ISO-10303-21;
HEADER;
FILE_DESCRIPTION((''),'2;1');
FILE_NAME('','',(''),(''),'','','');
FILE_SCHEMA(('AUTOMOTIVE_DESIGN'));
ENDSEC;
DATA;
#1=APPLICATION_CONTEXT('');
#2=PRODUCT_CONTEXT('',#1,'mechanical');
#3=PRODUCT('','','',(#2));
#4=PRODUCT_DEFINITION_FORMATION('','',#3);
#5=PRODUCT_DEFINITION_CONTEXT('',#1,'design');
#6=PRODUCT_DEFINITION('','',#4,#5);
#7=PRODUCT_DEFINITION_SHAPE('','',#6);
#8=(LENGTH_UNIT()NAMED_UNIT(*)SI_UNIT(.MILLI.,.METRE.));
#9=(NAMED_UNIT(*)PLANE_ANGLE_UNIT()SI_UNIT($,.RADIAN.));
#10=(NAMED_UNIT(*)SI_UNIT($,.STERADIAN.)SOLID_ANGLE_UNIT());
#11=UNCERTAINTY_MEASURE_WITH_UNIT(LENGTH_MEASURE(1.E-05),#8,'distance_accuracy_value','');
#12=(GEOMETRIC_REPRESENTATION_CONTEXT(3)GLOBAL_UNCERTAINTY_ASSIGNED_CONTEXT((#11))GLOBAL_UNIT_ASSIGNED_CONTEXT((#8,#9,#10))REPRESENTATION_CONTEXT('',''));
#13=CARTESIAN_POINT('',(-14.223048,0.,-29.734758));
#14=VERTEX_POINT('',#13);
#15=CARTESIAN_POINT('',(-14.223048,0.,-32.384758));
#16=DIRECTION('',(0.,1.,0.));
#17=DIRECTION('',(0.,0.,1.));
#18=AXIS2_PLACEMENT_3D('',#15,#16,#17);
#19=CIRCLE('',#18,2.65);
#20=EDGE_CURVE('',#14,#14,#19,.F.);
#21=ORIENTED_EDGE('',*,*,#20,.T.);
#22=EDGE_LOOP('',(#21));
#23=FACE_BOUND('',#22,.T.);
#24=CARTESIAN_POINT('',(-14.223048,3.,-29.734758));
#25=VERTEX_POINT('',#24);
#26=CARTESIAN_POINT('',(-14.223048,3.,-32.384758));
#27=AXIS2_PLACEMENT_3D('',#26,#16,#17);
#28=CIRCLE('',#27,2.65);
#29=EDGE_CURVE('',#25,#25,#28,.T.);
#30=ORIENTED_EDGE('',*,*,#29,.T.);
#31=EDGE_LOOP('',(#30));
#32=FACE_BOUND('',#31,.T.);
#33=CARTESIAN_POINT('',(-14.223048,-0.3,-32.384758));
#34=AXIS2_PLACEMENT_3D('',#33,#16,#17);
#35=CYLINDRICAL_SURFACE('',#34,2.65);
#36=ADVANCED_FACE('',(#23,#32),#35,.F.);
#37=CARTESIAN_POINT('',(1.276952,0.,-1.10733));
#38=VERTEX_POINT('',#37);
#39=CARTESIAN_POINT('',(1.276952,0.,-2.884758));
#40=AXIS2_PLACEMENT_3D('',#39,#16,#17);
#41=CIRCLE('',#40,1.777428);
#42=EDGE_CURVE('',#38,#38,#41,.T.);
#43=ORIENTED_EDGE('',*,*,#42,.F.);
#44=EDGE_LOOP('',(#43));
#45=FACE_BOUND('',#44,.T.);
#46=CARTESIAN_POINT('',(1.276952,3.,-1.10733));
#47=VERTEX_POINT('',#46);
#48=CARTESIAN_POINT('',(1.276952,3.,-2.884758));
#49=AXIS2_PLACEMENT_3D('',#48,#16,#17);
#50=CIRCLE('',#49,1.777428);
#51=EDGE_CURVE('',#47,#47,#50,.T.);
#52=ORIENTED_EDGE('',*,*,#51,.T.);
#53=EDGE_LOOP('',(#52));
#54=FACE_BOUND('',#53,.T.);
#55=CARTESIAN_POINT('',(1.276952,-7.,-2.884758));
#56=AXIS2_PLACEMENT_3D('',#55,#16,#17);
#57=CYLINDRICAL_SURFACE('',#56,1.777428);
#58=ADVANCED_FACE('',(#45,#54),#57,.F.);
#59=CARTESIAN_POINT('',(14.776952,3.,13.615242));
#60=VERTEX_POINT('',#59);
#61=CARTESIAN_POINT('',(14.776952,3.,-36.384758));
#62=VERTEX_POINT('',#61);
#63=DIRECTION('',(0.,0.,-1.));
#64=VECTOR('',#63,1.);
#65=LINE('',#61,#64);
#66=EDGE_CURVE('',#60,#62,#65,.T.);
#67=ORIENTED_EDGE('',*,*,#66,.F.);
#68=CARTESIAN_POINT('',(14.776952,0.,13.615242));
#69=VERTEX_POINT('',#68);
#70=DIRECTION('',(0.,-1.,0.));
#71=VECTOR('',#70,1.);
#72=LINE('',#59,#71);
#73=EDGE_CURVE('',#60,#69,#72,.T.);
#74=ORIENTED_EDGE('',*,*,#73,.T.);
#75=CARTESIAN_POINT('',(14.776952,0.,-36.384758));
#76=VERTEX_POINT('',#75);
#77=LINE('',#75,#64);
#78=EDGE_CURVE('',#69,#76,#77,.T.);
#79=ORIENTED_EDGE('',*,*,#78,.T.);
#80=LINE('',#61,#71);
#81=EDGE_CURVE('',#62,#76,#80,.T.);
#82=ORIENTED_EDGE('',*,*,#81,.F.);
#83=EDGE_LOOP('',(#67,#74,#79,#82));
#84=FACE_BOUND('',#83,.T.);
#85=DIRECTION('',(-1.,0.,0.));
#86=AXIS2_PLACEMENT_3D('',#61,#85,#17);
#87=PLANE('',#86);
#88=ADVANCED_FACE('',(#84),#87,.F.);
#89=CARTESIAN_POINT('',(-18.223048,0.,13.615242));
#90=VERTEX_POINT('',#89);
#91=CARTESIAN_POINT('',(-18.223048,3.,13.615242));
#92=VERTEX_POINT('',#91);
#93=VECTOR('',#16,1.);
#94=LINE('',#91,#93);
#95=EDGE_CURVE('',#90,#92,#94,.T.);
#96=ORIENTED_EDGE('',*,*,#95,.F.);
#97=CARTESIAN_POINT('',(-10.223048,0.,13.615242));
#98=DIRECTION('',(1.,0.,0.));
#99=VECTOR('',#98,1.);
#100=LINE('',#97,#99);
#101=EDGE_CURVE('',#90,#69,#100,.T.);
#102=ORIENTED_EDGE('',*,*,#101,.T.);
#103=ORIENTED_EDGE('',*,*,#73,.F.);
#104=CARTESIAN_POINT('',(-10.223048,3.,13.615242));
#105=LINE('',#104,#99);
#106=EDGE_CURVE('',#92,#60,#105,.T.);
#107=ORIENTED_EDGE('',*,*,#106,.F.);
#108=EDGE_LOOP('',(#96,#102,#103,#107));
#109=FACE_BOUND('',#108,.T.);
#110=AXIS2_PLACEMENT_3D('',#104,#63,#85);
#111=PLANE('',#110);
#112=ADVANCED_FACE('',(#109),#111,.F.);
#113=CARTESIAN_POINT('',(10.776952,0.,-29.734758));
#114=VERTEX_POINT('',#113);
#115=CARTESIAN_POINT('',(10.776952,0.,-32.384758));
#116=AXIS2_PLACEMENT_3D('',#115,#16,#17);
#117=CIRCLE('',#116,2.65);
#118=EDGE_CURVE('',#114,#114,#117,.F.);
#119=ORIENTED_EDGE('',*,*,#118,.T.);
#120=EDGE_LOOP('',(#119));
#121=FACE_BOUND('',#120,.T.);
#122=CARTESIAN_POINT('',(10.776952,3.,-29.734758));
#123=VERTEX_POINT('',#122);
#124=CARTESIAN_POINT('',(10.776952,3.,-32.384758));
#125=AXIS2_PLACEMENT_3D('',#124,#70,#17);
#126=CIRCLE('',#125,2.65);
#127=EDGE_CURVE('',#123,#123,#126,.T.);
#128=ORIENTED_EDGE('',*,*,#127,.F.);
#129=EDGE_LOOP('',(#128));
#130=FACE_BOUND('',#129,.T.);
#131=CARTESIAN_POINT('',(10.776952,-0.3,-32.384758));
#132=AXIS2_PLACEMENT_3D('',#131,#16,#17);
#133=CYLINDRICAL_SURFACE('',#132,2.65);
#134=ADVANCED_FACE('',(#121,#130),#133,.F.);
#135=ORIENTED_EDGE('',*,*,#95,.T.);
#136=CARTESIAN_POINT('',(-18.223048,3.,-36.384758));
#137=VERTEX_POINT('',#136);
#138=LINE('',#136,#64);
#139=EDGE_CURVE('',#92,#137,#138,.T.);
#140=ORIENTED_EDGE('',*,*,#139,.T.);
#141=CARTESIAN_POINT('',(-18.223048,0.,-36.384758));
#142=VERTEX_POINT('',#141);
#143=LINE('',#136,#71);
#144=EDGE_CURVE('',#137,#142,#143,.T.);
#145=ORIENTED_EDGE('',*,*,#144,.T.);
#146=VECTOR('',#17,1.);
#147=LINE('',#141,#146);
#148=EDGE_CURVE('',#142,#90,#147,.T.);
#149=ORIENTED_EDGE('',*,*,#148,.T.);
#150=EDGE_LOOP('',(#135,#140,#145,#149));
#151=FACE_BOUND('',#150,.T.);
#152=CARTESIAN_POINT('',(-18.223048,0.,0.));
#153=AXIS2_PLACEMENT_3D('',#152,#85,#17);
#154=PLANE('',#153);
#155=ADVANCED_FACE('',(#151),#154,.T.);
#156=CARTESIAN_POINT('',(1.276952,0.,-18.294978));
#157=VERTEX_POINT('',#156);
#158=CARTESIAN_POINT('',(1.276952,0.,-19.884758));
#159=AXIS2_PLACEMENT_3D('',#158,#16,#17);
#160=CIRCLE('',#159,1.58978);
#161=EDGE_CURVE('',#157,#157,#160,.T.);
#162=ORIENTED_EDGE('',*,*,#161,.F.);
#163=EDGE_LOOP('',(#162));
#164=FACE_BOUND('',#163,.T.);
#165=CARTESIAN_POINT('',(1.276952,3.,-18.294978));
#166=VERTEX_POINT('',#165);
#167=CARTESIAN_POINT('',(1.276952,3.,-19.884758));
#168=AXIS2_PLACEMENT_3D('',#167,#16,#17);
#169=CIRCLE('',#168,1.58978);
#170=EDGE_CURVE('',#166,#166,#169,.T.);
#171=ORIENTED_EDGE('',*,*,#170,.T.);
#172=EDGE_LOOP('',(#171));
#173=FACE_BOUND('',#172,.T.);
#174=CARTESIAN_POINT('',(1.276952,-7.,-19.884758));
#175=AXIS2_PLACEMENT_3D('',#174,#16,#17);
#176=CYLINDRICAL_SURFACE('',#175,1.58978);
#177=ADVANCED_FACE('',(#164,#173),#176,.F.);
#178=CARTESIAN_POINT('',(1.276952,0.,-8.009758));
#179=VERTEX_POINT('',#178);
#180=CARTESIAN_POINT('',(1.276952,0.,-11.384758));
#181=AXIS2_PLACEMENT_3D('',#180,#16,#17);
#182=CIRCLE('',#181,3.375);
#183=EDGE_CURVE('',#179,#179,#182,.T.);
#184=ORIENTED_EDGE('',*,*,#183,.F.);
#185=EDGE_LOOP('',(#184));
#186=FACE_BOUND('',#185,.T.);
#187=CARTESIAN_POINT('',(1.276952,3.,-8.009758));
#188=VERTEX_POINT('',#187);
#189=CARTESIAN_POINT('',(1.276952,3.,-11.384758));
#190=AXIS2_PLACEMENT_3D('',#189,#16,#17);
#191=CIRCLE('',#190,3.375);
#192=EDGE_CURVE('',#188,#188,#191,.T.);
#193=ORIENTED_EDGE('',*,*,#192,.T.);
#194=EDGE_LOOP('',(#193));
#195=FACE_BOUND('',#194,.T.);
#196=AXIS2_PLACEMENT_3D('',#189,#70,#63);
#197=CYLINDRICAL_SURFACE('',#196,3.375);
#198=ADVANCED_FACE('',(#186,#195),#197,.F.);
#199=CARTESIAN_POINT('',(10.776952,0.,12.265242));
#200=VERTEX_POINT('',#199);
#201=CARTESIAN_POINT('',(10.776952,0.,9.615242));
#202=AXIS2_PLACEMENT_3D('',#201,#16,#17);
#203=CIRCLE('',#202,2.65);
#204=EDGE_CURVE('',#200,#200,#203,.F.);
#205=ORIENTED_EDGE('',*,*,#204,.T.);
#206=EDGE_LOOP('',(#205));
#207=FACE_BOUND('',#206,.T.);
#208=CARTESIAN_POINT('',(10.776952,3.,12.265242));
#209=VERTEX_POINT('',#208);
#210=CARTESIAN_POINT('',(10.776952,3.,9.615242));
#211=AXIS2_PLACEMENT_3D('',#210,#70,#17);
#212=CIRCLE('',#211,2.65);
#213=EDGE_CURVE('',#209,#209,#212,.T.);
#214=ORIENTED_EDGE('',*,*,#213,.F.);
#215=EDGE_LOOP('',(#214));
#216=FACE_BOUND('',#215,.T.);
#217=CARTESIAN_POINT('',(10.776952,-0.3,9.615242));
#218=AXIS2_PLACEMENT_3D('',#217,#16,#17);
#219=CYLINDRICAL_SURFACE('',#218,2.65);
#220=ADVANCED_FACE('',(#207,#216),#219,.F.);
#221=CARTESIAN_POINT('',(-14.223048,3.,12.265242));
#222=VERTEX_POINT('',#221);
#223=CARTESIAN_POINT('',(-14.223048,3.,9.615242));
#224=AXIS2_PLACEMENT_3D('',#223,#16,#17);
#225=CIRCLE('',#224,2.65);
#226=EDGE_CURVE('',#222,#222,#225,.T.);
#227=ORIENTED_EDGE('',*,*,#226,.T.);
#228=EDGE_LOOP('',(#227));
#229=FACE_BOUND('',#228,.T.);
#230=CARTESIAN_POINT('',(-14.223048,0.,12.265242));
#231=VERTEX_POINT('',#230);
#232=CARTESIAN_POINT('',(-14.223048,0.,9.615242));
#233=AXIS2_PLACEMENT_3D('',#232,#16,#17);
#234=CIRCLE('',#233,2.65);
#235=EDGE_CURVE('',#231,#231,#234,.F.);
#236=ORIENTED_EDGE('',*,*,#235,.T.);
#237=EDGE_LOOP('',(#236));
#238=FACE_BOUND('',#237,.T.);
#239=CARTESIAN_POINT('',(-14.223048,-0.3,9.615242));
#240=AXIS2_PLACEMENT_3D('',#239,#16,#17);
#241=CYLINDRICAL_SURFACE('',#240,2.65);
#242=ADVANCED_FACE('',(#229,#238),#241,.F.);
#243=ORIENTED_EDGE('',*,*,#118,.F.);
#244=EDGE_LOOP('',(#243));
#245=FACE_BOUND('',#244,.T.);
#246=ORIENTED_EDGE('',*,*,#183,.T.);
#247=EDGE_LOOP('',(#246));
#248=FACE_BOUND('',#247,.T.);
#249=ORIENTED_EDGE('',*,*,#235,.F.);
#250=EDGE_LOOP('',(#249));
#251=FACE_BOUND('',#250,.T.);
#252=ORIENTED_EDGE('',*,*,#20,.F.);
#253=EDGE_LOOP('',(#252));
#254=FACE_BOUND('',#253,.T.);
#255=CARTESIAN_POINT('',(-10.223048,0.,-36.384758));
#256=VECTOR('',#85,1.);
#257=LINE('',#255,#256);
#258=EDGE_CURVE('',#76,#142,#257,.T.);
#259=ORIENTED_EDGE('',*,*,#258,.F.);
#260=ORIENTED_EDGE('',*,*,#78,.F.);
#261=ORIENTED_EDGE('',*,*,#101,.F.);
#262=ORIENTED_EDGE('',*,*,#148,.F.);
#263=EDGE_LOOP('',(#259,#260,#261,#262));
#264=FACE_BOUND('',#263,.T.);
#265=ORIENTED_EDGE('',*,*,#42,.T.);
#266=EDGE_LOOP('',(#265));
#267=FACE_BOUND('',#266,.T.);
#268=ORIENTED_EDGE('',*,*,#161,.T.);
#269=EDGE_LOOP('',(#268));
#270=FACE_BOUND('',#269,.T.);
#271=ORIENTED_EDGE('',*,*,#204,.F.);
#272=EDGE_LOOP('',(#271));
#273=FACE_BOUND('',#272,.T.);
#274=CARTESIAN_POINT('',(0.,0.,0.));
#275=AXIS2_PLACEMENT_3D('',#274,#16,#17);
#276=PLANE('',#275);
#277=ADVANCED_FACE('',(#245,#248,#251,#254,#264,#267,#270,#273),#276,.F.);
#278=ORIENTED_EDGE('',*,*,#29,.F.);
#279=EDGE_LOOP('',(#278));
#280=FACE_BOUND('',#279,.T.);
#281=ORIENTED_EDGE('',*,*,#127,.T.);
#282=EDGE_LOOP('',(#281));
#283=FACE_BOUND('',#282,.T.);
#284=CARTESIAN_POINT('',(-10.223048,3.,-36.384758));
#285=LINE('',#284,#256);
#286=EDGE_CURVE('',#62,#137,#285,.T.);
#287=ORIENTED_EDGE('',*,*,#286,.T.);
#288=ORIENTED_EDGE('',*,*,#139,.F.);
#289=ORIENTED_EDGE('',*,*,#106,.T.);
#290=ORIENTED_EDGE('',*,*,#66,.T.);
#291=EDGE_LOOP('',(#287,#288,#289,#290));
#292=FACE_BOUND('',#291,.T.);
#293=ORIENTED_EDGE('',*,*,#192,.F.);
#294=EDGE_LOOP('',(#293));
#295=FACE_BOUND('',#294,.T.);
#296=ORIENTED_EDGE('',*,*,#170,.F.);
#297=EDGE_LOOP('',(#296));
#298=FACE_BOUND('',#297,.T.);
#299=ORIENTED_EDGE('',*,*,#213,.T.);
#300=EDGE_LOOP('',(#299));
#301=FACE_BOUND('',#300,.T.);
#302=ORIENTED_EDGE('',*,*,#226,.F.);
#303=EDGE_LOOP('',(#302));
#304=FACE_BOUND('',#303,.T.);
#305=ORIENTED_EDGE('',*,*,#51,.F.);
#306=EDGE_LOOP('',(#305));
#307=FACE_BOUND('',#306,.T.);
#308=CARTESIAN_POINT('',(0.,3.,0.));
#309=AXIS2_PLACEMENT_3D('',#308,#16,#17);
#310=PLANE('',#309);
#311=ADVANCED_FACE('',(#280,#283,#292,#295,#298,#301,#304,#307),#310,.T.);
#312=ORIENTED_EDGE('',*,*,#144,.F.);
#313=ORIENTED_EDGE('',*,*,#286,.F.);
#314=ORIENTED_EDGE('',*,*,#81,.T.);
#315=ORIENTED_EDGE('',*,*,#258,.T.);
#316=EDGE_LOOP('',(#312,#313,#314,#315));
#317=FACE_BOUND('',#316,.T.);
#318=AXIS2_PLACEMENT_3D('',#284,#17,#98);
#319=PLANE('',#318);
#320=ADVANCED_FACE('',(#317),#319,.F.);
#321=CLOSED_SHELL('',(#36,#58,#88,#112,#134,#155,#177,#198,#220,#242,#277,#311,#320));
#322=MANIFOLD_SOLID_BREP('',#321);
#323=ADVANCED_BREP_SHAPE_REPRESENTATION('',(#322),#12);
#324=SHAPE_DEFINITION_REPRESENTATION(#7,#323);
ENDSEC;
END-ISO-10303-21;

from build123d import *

# Parameters (mm, degrees)
SKETCH1_W           = 25
SKETCH1_H           = 50
SKETCH1_R           = 3.375
BOSS_EXTRUDE1_DEPTH = 3
SKETCH2_W           = 50
SKETCH2_H           = 3
BOSS_EXTRUDE2_DEPTH = 8
SKETCH3_W           = 8
SKETCH3_H           = 50
BOSS_EXTRUDE3_DEPTH = 42
SKETCH4_R           = 2.65
CUT_EXTRUDE1_DEPTH  = 3.3
SKETCH5_R           = 5.802370205
CUT_EXTRUDE2_DEPTH  = 9
FILLET2_R           = 1
SKETCH6_R           = 12.7
BOSS_EXTRUDE4_DEPTH = 2
FILLET4_R           = 1
SKETCH8_R           = 1.589780168
SKETCH8_R_2         = 1.777428262
CUT_EXTRUDE3_DEPTH  = 10
SKETCH9_W           = 8
SKETCH9_H           = 42
CUT_EXTRUDE4_DEPTH  = 68.79439129
SKETCH10_W          = 33.517939775
SKETCH10_H          = 6.212330843
CUT_EXTRUDE5_DEPTH  = 55


with BuildPart() as part:
    # Sketch1 → Boss-Extrude1 (new body)
    with BuildSketch(Plane(origin=(0, 0, 0), x_dir=(1, 0, 0), z_dir=(0, 1, 0))):
        with Locations((2.276951673, 11.384758364)):
            Rectangle(SKETCH1_W, SKETCH1_H)
        with Locations(Location((1.276951673, 11.384758364, 0), (0, 0, 270))):
            Circle(SKETCH1_R, mode=Mode.SUBTRACT)
    extrude(amount=BOSS_EXTRUDE1_DEPTH)

    # Sketch2 → Boss-Extrude2 (add)
    with BuildSketch(Plane.ZY.offset(10.223048327)):
        with Locations((-11.384758364, 1.5)):
            Rectangle(SKETCH2_W, SKETCH2_H)
    extrude(amount=BOSS_EXTRUDE2_DEPTH)

    # Sketch3 → Boss-Extrude3 (add)
    with BuildSketch(Plane.XZ):
        with Locations((-14.223048327, -11.384758364)):
            Rectangle(SKETCH3_W, SKETCH3_H)
    extrude(amount=BOSS_EXTRUDE3_DEPTH)

    # Sketch4 → Cut-Extrude1 (cut)
    with BuildSketch(Plane(origin=(0, 3, 0), x_dir=(1, 0, 0), z_dir=(0, 1, 0))):
        with Locations(Location((-14.223048327, 32.384758364, 0), (0, 0, 270))):
            Circle(SKETCH4_R)
        with Locations(Location((-14.223048327, -9.615241636, 0), (0, 0, 270))):
            Circle(SKETCH4_R)
    cut_extrude1 = extrude(amount=-CUT_EXTRUDE1_DEPTH, mode=Mode.SUBTRACT)

    # Mirror1: Cut-Extrude1 across plane
    add(cut_extrude1.mirror(Plane.ZX.offset(-19.5)), mode=Mode.SUBTRACT)

    # Sketch5 → Cut-Extrude2 (cut)
    with BuildSketch(Plane.ZY.offset(18.223048327)):
        with Locations((-11.836279124, -21)):
            Circle(SKETCH5_R)
    extrude(amount=-CUT_EXTRUDE2_DEPTH, mode=Mode.SUBTRACT)

    # Fillet2
    fillet2_edges = [part.edges().sort_by_distance(p)[0] for p in [
        (-10.223048327, -21, -17.638649329),
    ]]
    fillet(fillet2_edges, radius=FILLET2_R)

    # Mirror2: Cut-Extrude1 across plane
    add(cut_extrude1.mirror(Plane.ZY.offset(1.723048327)), mode=Mode.SUBTRACT)

    # Sketch6 → Boss-Extrude4 (add)
    with BuildSketch(Plane(origin=(0, 3, 0), x_dir=(1, 0, 0), z_dir=(0, 1, 0))):
        with BuildLine():
            Line((14.776951673, 5.567542535), (14.776951673, 17.201974193))
            ThreePointArc((14.776951673, 17.201974193), (-13.423048327, 11.384758364), (14.776951673, 5.567542535))
        make_face()
        with Locations(Location((1.276951673, 11.384758364, 0), (0, 0, 270))):
            Circle(SKETCH6_R, mode=Mode.SUBTRACT)
    extrude(amount=BOSS_EXTRUDE4_DEPTH)

    # Fillet4
    # the kernel refuses this fillet: 1 mm, written as the material it takes off along each edge
    with BuildSketch(Plane(origin=(14.776951673, 5, -3.067542535), x_dir=(0, -1, 0), z_dir=(0, 0, -1))) as fillet4_piece_1:
        with BuildLine():
            CenterArc((FILLET4_R, FILLET4_R), FILLET4_R, 180, 90)
            Line((0, FILLET4_R), (0, 0))
            Line((0, 0), (FILLET4_R, 0))
        make_face()
    extrude(amount=16.634431658, mode=Mode.SUBTRACT)

    # Sketch8 → Cut-Extrude3 (cut)
    with BuildSketch(Plane(origin=(0, 3, 0), x_dir=(1, 0, 0), z_dir=(0, 1, 0))):
        with Locations(Location((1.276951673, 19.884758364, 0), (0, 0, 270))):
            Circle(SKETCH8_R)
        with Locations(Location((1.276951673, 2.884758364, 0), (0, 0, 270))):
            Circle(SKETCH8_R_2)
    extrude(amount=-CUT_EXTRUDE3_DEPTH, mode=Mode.SUBTRACT)

    # Sketch9 → Cut-Extrude4 (cut, through all)
    with BuildSketch(Plane.XY.offset(13.615241636)):
        with Locations((-14.223048327, -21)):
            Rectangle(SKETCH9_W, SKETCH9_H)
    extrude(amount=-CUT_EXTRUDE4_DEPTH, mode=Mode.SUBTRACT)

    # Sketch10 → Cut-Extrude5 (cut)
    with BuildSketch(Plane.XY.offset(13.615241636)):
        with Locations((-1.464078439, 6.106165422)):
            Rectangle(SKETCH10_W, SKETCH10_H)
    extrude(amount=-CUT_EXTRUDE5_DEPTH, mode=Mode.SUBTRACT)


solid = part.part
